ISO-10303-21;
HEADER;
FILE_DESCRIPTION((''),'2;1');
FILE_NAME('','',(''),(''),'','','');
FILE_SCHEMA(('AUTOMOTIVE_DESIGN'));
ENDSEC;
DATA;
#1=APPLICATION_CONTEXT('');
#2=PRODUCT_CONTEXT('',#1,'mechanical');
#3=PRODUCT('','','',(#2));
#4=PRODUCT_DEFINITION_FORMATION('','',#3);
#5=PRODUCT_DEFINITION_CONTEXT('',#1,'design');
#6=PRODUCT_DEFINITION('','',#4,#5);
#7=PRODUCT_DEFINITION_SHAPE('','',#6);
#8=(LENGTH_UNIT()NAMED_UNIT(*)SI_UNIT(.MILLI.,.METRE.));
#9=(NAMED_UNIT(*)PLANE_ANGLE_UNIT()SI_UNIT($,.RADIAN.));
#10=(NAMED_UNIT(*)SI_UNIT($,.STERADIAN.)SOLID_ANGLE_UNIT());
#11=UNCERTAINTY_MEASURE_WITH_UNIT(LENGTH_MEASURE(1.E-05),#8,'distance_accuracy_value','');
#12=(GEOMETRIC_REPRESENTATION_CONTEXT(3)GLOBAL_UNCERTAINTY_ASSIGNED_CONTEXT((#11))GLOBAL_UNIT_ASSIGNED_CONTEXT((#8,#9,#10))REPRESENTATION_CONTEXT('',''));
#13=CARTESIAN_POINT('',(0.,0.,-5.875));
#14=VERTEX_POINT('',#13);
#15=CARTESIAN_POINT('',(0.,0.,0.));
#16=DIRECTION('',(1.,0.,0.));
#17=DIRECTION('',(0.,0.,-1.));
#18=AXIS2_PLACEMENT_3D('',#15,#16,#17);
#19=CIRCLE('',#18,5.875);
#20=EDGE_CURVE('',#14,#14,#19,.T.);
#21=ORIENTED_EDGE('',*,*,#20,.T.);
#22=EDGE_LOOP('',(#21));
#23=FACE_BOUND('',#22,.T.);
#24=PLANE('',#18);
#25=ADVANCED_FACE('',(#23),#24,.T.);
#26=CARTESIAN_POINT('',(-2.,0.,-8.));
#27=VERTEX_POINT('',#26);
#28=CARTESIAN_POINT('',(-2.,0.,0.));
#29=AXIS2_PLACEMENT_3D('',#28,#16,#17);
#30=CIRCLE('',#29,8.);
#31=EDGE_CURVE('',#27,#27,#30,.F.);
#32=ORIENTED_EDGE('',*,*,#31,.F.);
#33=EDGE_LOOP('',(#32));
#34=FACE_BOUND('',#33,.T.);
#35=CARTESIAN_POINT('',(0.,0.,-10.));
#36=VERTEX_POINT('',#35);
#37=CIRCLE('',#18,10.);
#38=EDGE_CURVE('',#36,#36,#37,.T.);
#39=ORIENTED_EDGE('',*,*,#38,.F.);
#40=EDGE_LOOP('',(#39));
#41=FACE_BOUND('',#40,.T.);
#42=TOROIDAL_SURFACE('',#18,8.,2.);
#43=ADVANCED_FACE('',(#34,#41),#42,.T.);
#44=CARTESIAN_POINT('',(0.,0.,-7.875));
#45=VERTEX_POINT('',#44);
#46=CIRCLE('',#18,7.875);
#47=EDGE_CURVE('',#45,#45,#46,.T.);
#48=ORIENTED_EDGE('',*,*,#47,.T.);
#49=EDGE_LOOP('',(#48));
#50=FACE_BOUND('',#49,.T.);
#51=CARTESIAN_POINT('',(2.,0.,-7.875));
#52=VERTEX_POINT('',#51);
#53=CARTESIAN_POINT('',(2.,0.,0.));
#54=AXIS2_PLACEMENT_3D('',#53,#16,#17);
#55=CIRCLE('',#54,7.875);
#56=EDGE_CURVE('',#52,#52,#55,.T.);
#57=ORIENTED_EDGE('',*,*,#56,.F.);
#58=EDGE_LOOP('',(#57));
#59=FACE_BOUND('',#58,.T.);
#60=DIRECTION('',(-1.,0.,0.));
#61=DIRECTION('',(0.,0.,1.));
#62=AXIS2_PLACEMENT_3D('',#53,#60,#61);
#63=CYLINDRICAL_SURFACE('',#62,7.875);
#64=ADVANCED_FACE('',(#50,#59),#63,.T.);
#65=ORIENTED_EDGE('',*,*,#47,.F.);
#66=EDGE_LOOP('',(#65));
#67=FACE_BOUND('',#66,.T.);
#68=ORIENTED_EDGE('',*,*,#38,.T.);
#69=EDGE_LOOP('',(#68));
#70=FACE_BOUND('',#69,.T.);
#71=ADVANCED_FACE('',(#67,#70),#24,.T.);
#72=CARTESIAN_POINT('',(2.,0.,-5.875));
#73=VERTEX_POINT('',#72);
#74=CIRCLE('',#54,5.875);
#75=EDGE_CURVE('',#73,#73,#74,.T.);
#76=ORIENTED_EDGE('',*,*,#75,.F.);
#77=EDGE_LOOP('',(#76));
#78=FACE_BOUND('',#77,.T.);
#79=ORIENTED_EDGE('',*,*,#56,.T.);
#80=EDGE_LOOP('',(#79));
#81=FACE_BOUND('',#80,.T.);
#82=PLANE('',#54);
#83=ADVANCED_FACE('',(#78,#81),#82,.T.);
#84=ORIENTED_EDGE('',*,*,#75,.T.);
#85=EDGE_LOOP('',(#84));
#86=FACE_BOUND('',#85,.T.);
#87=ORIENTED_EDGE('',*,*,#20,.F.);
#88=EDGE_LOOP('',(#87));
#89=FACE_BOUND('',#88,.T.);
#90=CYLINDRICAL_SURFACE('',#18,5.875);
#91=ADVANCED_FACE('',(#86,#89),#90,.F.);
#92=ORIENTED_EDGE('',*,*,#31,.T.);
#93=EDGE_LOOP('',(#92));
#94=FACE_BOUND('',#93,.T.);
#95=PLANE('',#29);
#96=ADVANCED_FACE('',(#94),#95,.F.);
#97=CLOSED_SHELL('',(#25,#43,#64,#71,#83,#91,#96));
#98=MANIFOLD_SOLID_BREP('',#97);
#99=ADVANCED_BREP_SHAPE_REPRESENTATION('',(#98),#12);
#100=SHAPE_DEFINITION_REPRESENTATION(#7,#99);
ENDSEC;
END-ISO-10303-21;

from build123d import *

# Parameters (mm, degrees)
SKETCH1_R           = 7.875
BOSS_EXTRUDE1_DEPTH = 2
SKETCH1_3_R         = 10
BOSS_EXTRUDE2_DEPTH = 2
FILLET1_R           = 2
SKETCH2_R           = 5.875
CUT_EXTRUDE1_DEPTH  = 2


with BuildPart() as part:
    # Sketch1 → Boss-Extrude1 (new body)
    with BuildSketch(Plane(origin=(0, 0, 0), x_dir=(0, 0, -1), z_dir=(1, 0, 0))):
        Circle(SKETCH1_R)
    extrude(amount=BOSS_EXTRUDE1_DEPTH)

    # Sketch1<3> → Boss-Extrude2 (add)
    with BuildSketch(Plane(origin=(0, 0, 0), x_dir=(0, 0, -1), z_dir=(1, 0, 0))):
        Circle(SKETCH1_3_R)
    extrude(amount=-BOSS_EXTRUDE2_DEPTH)

    # Fillet1
    fillet1_edges = [part.edges().sort_by_distance(p)[0] for p in [
        (-2, 0, 10),
    ]]
    fillet(fillet1_edges, radius=FILLET1_R - 0.0001)  # a hair under: the kernel refuses the full size

    # Sketch2 → Cut-Extrude1 (cut)
    with BuildSketch(Plane(origin=(2, 0, 0), x_dir=(0, 0, -1), z_dir=(1, 0, 0))):
        Circle(SKETCH2_R)
    extrude(amount=-CUT_EXTRUDE1_DEPTH, mode=Mode.SUBTRACT)


solid = part.part
